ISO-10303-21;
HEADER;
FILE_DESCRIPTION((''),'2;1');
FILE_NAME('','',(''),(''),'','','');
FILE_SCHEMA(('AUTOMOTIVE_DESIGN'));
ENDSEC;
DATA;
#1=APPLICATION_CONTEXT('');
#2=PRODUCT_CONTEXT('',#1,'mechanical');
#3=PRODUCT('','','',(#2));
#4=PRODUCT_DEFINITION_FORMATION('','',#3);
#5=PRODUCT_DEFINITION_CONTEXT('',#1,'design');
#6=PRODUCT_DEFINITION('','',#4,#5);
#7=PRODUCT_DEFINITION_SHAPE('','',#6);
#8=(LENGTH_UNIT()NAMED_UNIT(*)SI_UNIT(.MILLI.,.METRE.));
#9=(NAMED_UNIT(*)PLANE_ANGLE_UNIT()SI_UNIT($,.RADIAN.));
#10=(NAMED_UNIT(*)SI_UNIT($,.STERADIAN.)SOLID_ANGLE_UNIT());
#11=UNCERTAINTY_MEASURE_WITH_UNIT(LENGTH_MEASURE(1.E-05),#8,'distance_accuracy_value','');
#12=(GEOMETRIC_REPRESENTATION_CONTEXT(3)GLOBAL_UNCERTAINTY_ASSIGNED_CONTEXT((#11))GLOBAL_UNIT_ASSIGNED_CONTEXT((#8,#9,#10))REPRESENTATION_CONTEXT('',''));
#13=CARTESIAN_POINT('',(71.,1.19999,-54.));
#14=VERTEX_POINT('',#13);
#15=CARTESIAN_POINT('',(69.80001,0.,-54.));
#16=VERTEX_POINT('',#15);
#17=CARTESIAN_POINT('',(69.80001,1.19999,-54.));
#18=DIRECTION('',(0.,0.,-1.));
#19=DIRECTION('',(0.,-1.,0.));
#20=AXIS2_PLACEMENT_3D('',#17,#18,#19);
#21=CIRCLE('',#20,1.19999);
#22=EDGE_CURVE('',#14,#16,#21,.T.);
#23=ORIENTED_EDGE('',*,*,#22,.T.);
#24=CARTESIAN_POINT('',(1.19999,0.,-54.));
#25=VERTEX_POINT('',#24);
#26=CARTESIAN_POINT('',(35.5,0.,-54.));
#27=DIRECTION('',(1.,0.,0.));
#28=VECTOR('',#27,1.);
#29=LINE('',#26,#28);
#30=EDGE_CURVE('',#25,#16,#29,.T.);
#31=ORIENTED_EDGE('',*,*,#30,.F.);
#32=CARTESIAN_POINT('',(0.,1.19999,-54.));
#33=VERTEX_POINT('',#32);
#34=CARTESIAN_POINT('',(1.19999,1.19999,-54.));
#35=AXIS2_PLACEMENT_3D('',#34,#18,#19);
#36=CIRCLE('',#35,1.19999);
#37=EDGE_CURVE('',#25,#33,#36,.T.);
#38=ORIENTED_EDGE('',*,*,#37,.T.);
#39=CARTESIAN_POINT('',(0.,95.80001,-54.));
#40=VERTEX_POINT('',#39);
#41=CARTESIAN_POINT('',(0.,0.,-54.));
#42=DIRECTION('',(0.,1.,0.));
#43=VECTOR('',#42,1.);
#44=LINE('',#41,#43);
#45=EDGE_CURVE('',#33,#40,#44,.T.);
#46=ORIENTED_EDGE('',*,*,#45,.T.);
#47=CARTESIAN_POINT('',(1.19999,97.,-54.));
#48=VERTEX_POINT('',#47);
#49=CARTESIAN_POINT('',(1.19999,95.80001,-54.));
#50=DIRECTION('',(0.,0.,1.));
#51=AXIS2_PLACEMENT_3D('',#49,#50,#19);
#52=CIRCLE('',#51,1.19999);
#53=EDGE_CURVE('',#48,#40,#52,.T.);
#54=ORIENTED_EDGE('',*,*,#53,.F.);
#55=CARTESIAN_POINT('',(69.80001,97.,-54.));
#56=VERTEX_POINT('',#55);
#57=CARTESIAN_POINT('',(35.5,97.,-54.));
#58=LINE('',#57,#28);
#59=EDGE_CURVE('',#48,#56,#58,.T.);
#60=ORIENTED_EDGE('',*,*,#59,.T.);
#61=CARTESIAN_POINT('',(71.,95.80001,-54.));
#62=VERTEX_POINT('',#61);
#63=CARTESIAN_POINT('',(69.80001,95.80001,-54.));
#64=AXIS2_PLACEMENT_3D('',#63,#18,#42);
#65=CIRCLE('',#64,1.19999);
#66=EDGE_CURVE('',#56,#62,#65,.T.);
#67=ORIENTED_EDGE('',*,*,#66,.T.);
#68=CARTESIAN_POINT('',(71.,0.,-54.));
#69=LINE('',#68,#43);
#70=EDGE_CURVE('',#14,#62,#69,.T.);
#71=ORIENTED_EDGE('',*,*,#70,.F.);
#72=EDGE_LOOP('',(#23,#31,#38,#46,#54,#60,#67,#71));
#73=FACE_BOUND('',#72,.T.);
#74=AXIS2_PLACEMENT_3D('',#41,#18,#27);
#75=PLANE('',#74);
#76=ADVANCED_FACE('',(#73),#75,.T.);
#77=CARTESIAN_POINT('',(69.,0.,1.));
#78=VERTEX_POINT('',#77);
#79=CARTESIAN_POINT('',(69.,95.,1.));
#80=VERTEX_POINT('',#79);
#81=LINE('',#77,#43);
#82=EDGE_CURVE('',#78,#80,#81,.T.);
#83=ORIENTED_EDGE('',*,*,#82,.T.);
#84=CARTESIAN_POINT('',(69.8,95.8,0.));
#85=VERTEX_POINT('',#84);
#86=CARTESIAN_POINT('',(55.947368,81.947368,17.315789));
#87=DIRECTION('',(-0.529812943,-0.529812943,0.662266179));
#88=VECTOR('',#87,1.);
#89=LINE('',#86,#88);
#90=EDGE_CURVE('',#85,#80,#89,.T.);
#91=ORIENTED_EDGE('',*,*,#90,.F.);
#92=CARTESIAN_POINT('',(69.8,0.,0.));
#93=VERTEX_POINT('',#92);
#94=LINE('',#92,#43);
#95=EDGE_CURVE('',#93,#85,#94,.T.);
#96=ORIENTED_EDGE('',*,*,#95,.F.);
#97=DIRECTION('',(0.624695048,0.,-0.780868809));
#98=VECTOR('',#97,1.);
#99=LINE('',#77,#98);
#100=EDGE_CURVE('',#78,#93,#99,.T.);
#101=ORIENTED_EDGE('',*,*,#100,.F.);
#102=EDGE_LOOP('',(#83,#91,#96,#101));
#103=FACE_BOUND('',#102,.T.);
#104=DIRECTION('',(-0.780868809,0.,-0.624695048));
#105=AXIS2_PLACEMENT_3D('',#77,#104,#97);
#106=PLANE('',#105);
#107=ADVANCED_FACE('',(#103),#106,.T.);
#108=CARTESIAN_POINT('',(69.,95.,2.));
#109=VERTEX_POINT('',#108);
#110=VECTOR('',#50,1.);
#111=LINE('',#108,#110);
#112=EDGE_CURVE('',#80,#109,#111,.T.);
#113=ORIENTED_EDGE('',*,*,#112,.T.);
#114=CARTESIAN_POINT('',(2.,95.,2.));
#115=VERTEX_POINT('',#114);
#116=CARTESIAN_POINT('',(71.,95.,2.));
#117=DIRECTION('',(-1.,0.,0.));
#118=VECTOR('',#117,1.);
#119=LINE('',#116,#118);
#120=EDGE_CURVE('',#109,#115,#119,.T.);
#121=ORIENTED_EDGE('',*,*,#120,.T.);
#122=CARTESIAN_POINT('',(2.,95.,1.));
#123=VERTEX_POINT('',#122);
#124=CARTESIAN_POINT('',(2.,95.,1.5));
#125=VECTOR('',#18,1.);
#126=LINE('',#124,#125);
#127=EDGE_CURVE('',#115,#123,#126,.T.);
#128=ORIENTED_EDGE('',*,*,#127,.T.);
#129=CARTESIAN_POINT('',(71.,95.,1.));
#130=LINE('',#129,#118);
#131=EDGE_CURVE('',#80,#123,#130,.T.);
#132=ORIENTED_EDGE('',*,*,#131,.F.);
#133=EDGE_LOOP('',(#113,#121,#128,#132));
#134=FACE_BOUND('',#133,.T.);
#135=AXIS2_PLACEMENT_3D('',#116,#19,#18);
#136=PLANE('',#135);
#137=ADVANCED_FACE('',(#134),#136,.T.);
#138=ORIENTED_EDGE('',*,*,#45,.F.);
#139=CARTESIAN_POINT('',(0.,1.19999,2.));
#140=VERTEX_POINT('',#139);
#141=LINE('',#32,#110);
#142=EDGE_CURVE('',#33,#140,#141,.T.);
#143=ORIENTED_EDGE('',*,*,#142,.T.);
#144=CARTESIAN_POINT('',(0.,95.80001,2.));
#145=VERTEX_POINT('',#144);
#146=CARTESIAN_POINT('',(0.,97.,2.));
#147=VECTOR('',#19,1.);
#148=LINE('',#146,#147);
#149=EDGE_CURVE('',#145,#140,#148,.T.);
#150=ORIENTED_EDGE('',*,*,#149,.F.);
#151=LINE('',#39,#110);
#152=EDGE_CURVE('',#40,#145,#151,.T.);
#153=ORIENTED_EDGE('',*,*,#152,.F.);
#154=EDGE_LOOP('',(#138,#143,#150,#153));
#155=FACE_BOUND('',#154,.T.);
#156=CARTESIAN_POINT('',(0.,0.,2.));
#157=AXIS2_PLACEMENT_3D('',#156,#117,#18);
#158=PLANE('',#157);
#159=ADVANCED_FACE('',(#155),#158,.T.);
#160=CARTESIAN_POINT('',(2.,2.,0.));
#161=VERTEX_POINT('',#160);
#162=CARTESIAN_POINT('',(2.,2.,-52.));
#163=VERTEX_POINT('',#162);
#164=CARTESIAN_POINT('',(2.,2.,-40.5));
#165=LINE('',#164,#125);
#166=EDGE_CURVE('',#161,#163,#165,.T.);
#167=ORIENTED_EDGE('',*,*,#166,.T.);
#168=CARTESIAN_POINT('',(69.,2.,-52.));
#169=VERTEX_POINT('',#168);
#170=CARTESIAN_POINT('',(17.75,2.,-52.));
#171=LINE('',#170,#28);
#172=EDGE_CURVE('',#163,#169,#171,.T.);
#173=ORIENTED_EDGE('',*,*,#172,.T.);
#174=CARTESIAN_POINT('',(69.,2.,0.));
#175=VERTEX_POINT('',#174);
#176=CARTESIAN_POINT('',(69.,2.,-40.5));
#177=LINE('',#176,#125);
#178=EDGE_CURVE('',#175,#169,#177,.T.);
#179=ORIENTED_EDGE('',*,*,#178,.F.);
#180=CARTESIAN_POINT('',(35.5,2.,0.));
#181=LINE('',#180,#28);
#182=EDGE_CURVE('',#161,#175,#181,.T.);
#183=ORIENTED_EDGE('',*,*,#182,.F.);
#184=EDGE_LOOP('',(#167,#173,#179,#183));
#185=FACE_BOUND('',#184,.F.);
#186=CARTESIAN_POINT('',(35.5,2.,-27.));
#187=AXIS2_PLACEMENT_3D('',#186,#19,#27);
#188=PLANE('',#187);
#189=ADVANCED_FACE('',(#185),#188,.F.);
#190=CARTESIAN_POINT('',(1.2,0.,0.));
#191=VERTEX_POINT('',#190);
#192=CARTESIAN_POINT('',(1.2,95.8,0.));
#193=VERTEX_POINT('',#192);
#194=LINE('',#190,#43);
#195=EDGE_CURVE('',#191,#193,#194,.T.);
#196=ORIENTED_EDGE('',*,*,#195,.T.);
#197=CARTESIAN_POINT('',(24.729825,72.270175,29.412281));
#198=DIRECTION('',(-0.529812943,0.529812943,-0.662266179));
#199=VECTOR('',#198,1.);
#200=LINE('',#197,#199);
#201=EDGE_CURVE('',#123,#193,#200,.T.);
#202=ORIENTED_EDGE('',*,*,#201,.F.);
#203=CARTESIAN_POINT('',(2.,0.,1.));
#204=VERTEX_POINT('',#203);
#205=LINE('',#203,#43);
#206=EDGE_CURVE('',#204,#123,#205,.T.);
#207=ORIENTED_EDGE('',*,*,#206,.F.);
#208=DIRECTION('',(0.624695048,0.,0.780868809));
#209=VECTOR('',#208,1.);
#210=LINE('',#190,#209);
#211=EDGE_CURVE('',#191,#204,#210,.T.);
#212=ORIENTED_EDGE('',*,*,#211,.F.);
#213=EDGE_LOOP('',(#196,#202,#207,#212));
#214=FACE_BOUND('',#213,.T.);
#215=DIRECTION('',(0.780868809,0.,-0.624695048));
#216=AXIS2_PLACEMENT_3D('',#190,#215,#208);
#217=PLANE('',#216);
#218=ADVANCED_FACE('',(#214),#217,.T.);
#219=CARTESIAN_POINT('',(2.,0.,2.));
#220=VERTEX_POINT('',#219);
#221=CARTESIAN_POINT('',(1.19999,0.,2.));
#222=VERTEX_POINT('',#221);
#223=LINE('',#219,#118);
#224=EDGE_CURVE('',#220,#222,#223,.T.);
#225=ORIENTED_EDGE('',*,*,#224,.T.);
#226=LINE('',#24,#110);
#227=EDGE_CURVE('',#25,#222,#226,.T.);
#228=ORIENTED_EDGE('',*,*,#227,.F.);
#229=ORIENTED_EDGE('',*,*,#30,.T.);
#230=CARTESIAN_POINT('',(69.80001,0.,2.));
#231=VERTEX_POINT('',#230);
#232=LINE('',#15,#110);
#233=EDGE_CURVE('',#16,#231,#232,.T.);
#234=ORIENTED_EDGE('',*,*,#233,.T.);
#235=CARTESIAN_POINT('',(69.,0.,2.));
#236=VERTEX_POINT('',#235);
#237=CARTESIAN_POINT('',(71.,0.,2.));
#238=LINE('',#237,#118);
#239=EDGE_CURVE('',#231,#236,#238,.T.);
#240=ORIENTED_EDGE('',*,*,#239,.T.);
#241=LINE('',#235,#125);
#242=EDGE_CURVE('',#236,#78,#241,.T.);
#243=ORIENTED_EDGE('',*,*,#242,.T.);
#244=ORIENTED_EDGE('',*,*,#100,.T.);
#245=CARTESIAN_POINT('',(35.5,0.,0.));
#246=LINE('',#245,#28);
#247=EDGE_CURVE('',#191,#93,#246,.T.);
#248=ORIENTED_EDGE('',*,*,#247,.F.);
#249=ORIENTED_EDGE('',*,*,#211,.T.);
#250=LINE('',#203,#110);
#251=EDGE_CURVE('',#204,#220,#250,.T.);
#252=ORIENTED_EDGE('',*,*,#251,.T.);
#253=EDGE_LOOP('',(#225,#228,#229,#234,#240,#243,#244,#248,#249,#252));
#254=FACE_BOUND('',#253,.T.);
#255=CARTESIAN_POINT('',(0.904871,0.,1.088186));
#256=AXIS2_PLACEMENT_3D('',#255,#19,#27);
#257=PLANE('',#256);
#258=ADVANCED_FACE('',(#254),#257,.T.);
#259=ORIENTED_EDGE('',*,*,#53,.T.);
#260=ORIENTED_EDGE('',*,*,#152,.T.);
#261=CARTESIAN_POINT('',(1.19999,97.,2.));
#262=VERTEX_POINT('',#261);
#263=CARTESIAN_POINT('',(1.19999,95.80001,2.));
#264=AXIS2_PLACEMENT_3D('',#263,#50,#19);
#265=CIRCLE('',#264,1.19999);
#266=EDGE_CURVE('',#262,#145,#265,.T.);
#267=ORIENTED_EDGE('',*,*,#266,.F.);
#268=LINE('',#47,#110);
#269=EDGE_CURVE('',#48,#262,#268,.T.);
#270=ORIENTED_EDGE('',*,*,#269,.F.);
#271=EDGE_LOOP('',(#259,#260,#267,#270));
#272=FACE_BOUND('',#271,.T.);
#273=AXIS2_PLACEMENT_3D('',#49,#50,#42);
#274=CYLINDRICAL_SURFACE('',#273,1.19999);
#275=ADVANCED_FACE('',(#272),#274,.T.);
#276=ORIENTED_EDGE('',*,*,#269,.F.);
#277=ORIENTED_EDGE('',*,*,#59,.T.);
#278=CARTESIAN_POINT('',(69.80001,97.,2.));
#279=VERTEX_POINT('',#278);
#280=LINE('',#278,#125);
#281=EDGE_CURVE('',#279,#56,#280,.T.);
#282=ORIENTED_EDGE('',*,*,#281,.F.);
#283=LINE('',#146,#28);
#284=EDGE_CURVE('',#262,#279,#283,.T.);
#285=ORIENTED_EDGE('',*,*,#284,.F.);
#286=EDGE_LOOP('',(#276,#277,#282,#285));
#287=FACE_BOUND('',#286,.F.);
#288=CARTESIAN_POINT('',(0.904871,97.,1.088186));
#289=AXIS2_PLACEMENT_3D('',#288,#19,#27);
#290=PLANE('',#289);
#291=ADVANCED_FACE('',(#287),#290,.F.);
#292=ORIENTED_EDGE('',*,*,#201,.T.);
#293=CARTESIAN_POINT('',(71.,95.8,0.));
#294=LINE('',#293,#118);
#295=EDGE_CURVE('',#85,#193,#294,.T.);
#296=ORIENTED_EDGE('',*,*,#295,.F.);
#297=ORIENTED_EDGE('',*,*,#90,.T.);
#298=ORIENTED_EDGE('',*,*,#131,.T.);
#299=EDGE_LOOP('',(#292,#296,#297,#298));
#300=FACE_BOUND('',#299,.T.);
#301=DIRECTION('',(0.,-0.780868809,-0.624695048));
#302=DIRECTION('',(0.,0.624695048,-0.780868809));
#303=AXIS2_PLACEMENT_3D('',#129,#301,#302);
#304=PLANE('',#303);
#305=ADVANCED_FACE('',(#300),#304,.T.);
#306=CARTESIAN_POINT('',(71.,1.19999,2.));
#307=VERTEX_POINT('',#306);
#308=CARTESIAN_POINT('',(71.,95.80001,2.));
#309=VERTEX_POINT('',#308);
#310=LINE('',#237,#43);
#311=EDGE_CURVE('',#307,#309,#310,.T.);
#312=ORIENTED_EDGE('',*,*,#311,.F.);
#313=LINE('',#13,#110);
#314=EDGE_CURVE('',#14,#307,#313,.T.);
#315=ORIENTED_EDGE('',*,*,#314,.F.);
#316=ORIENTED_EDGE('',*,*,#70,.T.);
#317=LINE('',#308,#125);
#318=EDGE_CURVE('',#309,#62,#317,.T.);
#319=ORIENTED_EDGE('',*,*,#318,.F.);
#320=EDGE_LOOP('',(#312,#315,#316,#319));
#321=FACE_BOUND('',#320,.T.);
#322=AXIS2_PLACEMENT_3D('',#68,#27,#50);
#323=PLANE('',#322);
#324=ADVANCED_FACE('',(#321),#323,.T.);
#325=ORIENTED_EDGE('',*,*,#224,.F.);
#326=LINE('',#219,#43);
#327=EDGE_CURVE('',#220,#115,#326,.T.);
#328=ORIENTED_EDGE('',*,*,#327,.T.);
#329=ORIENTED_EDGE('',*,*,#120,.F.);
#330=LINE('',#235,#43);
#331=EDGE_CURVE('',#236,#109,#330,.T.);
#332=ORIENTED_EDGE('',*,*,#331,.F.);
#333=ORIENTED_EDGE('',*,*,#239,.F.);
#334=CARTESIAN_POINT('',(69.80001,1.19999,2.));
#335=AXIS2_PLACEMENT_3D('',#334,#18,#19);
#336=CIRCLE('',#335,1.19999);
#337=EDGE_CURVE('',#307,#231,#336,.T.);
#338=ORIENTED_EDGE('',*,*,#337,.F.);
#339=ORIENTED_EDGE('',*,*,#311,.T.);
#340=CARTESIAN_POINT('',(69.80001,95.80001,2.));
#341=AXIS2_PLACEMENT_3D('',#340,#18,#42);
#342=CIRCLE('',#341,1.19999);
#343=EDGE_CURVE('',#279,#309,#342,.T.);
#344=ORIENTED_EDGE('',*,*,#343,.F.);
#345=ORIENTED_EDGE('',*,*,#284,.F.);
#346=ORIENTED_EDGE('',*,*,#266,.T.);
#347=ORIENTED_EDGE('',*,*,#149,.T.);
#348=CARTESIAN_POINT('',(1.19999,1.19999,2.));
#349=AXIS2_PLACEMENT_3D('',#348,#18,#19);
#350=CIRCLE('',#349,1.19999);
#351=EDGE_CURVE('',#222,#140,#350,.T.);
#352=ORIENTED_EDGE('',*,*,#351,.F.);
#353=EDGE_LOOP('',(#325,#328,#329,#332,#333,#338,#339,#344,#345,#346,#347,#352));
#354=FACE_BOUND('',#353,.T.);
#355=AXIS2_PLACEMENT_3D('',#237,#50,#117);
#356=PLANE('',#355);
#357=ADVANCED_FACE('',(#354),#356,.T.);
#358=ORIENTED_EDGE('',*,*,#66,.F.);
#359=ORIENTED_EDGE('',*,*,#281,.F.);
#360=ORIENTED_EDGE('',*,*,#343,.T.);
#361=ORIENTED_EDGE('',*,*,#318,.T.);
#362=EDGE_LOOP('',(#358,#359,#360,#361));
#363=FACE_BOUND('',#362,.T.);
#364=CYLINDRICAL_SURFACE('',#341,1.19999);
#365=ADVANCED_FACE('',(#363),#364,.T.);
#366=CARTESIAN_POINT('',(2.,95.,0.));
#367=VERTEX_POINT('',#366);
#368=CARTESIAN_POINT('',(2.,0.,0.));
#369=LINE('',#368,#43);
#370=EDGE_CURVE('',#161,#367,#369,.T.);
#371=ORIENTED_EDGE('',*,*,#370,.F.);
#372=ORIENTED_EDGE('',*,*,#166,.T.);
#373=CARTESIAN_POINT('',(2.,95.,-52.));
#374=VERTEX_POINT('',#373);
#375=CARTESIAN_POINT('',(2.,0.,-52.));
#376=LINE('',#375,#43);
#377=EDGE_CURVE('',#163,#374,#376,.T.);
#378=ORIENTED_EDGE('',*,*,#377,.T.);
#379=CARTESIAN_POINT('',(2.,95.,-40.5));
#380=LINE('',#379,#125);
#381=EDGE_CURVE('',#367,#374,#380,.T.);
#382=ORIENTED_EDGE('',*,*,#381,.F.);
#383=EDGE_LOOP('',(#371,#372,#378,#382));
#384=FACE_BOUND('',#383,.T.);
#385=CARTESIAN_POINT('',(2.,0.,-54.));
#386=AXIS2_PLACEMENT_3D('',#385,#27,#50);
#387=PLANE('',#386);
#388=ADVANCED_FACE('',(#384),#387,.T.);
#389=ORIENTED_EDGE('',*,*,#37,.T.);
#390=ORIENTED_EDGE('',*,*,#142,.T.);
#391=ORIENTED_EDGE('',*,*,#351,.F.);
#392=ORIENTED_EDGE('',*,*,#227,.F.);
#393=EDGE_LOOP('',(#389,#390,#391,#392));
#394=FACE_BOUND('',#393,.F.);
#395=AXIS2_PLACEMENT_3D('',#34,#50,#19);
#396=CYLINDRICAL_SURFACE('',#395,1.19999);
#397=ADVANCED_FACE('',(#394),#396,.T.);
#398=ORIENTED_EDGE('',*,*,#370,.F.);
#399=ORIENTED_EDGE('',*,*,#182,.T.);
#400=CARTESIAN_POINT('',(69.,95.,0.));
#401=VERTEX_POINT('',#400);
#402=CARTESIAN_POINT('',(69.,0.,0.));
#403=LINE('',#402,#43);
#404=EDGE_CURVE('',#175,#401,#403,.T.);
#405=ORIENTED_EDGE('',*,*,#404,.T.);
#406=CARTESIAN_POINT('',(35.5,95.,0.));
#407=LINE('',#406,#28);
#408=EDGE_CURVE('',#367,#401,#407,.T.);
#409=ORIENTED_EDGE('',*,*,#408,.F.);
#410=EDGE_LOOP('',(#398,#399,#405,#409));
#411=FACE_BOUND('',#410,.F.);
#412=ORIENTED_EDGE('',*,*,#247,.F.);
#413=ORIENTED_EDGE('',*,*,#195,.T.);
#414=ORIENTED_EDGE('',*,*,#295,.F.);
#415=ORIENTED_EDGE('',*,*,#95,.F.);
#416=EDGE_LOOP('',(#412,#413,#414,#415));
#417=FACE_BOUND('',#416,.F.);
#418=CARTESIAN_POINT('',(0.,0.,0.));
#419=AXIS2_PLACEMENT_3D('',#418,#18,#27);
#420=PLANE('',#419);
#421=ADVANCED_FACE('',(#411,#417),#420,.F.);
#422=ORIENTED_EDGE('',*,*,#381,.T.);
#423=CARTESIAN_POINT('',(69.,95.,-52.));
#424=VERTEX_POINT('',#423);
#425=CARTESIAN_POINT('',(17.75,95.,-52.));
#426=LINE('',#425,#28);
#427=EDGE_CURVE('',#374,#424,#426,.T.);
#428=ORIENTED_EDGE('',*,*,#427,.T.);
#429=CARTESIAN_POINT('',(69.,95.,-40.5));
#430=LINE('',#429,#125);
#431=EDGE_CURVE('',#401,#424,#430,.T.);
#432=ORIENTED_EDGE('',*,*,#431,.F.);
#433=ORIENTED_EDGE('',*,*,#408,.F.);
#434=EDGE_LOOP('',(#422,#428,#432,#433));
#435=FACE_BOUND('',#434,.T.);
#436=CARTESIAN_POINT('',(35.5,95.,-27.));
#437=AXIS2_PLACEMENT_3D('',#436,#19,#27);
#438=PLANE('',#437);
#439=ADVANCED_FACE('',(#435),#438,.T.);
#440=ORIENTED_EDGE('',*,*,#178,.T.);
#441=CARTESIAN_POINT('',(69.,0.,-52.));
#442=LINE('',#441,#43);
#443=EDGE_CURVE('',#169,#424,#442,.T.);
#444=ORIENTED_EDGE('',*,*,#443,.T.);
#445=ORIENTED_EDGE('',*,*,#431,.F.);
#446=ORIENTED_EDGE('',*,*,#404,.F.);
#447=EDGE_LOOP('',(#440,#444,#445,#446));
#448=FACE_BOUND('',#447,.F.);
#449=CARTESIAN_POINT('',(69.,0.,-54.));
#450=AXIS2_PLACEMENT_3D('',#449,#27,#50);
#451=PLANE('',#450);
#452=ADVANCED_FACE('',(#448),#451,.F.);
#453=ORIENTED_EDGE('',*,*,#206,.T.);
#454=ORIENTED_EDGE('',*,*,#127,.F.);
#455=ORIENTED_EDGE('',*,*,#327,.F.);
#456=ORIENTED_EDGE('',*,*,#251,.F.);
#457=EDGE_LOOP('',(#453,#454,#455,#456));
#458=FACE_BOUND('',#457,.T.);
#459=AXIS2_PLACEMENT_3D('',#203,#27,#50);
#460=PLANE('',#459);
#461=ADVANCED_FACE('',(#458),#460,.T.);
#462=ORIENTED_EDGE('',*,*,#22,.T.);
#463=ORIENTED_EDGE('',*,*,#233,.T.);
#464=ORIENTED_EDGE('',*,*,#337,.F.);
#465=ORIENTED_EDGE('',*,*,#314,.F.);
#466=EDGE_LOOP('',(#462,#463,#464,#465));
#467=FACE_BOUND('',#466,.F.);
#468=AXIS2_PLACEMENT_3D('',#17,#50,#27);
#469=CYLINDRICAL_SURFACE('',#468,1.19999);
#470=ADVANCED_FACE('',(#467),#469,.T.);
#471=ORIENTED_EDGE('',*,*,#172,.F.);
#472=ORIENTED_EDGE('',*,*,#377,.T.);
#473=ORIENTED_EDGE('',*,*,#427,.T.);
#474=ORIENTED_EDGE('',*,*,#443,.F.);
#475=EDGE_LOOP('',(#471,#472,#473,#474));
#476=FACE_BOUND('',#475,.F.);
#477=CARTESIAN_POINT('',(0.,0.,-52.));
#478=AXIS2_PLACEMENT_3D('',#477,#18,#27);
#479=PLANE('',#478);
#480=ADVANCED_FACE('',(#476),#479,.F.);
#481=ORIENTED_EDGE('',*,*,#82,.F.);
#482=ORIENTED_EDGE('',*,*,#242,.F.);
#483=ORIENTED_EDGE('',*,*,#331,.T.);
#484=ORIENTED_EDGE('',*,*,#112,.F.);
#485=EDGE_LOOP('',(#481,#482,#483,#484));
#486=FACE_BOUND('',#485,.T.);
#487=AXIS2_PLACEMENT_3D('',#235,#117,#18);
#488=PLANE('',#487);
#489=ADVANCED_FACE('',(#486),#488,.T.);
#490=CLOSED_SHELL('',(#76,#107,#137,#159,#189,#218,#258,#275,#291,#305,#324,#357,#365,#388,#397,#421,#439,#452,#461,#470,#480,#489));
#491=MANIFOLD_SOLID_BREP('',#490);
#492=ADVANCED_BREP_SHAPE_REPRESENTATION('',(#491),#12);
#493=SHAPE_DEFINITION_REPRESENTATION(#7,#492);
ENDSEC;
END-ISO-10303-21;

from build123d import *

# Parameters (mm, degrees)
F0_W     = 71
F0_H     = 54
F1_DEPTH = 97
F2_T     = -2
F4_DEPTH = 97
F6_DEPTH = 71
F7_R     = 1.19999


# Not quite as in the source:
# - a fillet or chamfer is up to 0.001 mm smaller than in the source, because OpenCascade refuses the exact size


with BuildPart() as f1:
    # F0 (on Front) → F1 (new body)
    with BuildSketch(Plane.XZ):
        with Locations((35.5, -27)):
            Rectangle(F0_W, F0_H)
    extrude(amount=-F1_DEPTH)

    # F2
    f2_openings = [f1.faces().sort_by_distance(p)[0] for p in [
        (35.5, 48.5, 0),
    ]]
    offset(amount=F2_T, openings=f2_openings)

    # F3 (on face) → F4 (join, through all)
    with BuildSketch(Plane.XZ):
        Polygon((0, 2), (0, 0), (1.2, 0), (2, 1), (2, 2), align=None)
        Polygon((69, 1), (69.8, 0), (71, 0), (71, 2), (69, 2), align=None)
    extrude(amount=-F4_DEPTH)

    # F5 (on face) → F6 (join, through all)
    with BuildSketch(Plane.YZ.offset(71)):
        Polygon((97, 0), (97, 2), (95, 2), (95, 1), (95.8, 0), align=None)
    extrude(amount=-F6_DEPTH)

    # F7 (radius 1.2 in the source; OpenCascade refuses exactly that, so slightly less here)
    f7_edges = [f1.edges().sort_by_distance(p)[0] for p in [
        (71, 0, -26),
        (71, 97, -26),
        (0, 0, -26),
        (0, 97, -26),
    ]]
    fillet(f7_edges, radius=F7_R)


solid = f1.part
